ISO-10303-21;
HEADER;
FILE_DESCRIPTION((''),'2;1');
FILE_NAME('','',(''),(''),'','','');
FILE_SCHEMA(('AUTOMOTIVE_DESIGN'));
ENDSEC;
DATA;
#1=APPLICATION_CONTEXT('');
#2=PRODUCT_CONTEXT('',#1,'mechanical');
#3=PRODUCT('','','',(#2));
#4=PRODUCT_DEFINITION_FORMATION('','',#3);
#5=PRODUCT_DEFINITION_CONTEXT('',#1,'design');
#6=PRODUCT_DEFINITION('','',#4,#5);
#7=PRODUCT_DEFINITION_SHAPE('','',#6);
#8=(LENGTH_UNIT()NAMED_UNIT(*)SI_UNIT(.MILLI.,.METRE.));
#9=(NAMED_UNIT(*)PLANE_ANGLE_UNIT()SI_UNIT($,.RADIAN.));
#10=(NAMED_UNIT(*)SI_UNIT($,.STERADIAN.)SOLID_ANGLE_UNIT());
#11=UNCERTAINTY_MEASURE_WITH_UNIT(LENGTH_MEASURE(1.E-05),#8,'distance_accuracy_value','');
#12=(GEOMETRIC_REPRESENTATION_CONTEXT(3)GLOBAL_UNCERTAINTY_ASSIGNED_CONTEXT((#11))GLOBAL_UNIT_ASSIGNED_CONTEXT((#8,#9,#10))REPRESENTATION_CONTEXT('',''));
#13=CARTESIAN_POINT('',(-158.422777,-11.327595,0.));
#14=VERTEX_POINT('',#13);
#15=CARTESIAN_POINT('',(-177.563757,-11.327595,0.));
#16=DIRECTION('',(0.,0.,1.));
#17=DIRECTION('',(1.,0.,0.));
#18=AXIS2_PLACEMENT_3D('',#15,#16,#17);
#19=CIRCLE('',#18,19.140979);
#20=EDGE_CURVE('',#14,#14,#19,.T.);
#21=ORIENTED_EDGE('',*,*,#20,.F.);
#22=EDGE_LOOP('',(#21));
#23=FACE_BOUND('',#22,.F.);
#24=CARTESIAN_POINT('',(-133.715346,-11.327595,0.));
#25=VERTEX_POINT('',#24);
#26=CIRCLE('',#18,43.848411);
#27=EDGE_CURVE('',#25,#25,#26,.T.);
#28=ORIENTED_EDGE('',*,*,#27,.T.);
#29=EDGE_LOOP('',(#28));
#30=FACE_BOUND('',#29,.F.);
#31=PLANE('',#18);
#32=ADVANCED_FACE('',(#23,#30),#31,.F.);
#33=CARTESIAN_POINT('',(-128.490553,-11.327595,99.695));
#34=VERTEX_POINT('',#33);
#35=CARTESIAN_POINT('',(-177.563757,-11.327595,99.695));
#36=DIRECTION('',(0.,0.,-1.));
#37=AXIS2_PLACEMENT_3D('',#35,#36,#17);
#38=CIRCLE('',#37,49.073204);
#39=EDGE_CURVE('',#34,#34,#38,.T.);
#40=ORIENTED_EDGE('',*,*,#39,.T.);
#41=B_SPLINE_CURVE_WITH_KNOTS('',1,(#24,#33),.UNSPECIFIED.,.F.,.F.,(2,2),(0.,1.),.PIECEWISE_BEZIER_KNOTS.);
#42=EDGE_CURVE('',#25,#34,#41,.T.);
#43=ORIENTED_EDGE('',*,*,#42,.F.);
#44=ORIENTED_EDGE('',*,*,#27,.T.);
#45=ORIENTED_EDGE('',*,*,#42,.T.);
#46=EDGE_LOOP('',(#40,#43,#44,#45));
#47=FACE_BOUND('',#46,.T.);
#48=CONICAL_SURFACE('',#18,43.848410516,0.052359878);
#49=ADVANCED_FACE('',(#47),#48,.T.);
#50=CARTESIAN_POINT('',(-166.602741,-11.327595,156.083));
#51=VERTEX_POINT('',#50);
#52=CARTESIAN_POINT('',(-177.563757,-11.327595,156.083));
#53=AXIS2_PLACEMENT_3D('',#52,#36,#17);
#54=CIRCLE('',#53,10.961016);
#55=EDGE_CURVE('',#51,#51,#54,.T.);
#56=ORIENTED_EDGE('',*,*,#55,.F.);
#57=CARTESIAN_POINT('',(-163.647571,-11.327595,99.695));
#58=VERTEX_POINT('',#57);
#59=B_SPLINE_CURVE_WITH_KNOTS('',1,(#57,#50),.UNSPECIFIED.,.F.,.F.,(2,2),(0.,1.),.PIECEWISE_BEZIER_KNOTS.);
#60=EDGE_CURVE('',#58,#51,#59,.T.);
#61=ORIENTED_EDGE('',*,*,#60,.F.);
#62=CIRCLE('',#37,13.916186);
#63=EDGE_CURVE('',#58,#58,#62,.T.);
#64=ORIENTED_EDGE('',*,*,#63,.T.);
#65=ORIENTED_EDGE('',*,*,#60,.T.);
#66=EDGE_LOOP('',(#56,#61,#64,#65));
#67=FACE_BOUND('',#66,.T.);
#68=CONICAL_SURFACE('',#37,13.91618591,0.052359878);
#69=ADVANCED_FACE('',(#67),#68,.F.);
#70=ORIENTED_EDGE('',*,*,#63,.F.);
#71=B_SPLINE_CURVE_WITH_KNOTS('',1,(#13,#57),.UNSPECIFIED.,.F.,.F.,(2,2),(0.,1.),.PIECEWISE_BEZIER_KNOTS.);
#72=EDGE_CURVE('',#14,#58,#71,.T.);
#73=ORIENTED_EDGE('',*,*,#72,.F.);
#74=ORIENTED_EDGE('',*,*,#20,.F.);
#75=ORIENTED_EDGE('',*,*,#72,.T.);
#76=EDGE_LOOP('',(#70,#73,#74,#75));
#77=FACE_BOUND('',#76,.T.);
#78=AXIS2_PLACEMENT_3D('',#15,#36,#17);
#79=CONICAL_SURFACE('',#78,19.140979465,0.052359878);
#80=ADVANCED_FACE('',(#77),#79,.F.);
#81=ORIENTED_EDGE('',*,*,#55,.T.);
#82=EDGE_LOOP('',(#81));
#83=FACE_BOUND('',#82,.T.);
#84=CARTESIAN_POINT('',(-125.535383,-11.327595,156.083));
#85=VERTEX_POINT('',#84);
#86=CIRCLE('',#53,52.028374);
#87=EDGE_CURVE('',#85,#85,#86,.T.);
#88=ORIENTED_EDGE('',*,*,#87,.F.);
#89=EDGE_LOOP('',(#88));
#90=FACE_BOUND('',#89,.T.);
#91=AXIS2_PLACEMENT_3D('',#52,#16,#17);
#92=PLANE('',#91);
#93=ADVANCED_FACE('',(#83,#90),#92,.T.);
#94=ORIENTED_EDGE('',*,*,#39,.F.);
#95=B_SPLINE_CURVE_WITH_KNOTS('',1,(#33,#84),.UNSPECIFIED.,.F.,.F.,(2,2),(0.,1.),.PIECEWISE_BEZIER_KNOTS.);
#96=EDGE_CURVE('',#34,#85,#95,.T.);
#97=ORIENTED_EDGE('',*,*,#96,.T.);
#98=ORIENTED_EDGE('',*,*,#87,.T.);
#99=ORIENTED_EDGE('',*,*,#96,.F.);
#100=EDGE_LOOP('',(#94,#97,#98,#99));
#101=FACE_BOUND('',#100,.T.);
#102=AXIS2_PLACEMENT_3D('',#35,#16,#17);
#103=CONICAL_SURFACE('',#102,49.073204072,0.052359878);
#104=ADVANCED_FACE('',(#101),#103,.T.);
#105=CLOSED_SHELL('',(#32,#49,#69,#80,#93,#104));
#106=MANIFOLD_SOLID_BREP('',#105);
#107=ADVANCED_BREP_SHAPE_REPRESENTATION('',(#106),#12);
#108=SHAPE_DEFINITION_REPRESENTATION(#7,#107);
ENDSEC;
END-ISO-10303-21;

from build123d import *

# Parameters (mm, degrees)
F0_R        = 43.8484105158
F0_R_2      = 19.1409794654
F1_DEPTH    = 99.695
F1_TAPER    = -3
F1_FACE_R   = 49.0732040715
F1_FACE_R_2 = 13.9161859098
F2_DEPTH    = 56.388
F2_TAPER    = -3


# Not quite as in the source:
# - a feature of the source that left no trace in its solid (it failed there, or was rolled back) is left out


with BuildPart() as f1:
    # F0 (on Top) → F1 (new body)
    with BuildSketch(Plane.XY):
        with Locations((-177.5637567043, -11.3275945187)):
            Circle(F0_R)
        with Locations((-177.5637567043, -11.3275945187)):
            Circle(F0_R_2, mode=Mode.SUBTRACT)
    extrude(amount=F1_DEPTH, taper=F1_TAPER)

    # F1_face (on face) → F2 (join)
    with BuildSketch(Plane(origin=(-177.5637567043, -11.3275945187, 99.695), x_dir=(1, 0, 0), z_dir=(0, 0, 1))):
        Circle(F1_FACE_R)
        Circle(F1_FACE_R_2, mode=Mode.SUBTRACT)
    extrude(amount=F2_DEPTH, taper=F2_TAPER)


solid = f1.part
